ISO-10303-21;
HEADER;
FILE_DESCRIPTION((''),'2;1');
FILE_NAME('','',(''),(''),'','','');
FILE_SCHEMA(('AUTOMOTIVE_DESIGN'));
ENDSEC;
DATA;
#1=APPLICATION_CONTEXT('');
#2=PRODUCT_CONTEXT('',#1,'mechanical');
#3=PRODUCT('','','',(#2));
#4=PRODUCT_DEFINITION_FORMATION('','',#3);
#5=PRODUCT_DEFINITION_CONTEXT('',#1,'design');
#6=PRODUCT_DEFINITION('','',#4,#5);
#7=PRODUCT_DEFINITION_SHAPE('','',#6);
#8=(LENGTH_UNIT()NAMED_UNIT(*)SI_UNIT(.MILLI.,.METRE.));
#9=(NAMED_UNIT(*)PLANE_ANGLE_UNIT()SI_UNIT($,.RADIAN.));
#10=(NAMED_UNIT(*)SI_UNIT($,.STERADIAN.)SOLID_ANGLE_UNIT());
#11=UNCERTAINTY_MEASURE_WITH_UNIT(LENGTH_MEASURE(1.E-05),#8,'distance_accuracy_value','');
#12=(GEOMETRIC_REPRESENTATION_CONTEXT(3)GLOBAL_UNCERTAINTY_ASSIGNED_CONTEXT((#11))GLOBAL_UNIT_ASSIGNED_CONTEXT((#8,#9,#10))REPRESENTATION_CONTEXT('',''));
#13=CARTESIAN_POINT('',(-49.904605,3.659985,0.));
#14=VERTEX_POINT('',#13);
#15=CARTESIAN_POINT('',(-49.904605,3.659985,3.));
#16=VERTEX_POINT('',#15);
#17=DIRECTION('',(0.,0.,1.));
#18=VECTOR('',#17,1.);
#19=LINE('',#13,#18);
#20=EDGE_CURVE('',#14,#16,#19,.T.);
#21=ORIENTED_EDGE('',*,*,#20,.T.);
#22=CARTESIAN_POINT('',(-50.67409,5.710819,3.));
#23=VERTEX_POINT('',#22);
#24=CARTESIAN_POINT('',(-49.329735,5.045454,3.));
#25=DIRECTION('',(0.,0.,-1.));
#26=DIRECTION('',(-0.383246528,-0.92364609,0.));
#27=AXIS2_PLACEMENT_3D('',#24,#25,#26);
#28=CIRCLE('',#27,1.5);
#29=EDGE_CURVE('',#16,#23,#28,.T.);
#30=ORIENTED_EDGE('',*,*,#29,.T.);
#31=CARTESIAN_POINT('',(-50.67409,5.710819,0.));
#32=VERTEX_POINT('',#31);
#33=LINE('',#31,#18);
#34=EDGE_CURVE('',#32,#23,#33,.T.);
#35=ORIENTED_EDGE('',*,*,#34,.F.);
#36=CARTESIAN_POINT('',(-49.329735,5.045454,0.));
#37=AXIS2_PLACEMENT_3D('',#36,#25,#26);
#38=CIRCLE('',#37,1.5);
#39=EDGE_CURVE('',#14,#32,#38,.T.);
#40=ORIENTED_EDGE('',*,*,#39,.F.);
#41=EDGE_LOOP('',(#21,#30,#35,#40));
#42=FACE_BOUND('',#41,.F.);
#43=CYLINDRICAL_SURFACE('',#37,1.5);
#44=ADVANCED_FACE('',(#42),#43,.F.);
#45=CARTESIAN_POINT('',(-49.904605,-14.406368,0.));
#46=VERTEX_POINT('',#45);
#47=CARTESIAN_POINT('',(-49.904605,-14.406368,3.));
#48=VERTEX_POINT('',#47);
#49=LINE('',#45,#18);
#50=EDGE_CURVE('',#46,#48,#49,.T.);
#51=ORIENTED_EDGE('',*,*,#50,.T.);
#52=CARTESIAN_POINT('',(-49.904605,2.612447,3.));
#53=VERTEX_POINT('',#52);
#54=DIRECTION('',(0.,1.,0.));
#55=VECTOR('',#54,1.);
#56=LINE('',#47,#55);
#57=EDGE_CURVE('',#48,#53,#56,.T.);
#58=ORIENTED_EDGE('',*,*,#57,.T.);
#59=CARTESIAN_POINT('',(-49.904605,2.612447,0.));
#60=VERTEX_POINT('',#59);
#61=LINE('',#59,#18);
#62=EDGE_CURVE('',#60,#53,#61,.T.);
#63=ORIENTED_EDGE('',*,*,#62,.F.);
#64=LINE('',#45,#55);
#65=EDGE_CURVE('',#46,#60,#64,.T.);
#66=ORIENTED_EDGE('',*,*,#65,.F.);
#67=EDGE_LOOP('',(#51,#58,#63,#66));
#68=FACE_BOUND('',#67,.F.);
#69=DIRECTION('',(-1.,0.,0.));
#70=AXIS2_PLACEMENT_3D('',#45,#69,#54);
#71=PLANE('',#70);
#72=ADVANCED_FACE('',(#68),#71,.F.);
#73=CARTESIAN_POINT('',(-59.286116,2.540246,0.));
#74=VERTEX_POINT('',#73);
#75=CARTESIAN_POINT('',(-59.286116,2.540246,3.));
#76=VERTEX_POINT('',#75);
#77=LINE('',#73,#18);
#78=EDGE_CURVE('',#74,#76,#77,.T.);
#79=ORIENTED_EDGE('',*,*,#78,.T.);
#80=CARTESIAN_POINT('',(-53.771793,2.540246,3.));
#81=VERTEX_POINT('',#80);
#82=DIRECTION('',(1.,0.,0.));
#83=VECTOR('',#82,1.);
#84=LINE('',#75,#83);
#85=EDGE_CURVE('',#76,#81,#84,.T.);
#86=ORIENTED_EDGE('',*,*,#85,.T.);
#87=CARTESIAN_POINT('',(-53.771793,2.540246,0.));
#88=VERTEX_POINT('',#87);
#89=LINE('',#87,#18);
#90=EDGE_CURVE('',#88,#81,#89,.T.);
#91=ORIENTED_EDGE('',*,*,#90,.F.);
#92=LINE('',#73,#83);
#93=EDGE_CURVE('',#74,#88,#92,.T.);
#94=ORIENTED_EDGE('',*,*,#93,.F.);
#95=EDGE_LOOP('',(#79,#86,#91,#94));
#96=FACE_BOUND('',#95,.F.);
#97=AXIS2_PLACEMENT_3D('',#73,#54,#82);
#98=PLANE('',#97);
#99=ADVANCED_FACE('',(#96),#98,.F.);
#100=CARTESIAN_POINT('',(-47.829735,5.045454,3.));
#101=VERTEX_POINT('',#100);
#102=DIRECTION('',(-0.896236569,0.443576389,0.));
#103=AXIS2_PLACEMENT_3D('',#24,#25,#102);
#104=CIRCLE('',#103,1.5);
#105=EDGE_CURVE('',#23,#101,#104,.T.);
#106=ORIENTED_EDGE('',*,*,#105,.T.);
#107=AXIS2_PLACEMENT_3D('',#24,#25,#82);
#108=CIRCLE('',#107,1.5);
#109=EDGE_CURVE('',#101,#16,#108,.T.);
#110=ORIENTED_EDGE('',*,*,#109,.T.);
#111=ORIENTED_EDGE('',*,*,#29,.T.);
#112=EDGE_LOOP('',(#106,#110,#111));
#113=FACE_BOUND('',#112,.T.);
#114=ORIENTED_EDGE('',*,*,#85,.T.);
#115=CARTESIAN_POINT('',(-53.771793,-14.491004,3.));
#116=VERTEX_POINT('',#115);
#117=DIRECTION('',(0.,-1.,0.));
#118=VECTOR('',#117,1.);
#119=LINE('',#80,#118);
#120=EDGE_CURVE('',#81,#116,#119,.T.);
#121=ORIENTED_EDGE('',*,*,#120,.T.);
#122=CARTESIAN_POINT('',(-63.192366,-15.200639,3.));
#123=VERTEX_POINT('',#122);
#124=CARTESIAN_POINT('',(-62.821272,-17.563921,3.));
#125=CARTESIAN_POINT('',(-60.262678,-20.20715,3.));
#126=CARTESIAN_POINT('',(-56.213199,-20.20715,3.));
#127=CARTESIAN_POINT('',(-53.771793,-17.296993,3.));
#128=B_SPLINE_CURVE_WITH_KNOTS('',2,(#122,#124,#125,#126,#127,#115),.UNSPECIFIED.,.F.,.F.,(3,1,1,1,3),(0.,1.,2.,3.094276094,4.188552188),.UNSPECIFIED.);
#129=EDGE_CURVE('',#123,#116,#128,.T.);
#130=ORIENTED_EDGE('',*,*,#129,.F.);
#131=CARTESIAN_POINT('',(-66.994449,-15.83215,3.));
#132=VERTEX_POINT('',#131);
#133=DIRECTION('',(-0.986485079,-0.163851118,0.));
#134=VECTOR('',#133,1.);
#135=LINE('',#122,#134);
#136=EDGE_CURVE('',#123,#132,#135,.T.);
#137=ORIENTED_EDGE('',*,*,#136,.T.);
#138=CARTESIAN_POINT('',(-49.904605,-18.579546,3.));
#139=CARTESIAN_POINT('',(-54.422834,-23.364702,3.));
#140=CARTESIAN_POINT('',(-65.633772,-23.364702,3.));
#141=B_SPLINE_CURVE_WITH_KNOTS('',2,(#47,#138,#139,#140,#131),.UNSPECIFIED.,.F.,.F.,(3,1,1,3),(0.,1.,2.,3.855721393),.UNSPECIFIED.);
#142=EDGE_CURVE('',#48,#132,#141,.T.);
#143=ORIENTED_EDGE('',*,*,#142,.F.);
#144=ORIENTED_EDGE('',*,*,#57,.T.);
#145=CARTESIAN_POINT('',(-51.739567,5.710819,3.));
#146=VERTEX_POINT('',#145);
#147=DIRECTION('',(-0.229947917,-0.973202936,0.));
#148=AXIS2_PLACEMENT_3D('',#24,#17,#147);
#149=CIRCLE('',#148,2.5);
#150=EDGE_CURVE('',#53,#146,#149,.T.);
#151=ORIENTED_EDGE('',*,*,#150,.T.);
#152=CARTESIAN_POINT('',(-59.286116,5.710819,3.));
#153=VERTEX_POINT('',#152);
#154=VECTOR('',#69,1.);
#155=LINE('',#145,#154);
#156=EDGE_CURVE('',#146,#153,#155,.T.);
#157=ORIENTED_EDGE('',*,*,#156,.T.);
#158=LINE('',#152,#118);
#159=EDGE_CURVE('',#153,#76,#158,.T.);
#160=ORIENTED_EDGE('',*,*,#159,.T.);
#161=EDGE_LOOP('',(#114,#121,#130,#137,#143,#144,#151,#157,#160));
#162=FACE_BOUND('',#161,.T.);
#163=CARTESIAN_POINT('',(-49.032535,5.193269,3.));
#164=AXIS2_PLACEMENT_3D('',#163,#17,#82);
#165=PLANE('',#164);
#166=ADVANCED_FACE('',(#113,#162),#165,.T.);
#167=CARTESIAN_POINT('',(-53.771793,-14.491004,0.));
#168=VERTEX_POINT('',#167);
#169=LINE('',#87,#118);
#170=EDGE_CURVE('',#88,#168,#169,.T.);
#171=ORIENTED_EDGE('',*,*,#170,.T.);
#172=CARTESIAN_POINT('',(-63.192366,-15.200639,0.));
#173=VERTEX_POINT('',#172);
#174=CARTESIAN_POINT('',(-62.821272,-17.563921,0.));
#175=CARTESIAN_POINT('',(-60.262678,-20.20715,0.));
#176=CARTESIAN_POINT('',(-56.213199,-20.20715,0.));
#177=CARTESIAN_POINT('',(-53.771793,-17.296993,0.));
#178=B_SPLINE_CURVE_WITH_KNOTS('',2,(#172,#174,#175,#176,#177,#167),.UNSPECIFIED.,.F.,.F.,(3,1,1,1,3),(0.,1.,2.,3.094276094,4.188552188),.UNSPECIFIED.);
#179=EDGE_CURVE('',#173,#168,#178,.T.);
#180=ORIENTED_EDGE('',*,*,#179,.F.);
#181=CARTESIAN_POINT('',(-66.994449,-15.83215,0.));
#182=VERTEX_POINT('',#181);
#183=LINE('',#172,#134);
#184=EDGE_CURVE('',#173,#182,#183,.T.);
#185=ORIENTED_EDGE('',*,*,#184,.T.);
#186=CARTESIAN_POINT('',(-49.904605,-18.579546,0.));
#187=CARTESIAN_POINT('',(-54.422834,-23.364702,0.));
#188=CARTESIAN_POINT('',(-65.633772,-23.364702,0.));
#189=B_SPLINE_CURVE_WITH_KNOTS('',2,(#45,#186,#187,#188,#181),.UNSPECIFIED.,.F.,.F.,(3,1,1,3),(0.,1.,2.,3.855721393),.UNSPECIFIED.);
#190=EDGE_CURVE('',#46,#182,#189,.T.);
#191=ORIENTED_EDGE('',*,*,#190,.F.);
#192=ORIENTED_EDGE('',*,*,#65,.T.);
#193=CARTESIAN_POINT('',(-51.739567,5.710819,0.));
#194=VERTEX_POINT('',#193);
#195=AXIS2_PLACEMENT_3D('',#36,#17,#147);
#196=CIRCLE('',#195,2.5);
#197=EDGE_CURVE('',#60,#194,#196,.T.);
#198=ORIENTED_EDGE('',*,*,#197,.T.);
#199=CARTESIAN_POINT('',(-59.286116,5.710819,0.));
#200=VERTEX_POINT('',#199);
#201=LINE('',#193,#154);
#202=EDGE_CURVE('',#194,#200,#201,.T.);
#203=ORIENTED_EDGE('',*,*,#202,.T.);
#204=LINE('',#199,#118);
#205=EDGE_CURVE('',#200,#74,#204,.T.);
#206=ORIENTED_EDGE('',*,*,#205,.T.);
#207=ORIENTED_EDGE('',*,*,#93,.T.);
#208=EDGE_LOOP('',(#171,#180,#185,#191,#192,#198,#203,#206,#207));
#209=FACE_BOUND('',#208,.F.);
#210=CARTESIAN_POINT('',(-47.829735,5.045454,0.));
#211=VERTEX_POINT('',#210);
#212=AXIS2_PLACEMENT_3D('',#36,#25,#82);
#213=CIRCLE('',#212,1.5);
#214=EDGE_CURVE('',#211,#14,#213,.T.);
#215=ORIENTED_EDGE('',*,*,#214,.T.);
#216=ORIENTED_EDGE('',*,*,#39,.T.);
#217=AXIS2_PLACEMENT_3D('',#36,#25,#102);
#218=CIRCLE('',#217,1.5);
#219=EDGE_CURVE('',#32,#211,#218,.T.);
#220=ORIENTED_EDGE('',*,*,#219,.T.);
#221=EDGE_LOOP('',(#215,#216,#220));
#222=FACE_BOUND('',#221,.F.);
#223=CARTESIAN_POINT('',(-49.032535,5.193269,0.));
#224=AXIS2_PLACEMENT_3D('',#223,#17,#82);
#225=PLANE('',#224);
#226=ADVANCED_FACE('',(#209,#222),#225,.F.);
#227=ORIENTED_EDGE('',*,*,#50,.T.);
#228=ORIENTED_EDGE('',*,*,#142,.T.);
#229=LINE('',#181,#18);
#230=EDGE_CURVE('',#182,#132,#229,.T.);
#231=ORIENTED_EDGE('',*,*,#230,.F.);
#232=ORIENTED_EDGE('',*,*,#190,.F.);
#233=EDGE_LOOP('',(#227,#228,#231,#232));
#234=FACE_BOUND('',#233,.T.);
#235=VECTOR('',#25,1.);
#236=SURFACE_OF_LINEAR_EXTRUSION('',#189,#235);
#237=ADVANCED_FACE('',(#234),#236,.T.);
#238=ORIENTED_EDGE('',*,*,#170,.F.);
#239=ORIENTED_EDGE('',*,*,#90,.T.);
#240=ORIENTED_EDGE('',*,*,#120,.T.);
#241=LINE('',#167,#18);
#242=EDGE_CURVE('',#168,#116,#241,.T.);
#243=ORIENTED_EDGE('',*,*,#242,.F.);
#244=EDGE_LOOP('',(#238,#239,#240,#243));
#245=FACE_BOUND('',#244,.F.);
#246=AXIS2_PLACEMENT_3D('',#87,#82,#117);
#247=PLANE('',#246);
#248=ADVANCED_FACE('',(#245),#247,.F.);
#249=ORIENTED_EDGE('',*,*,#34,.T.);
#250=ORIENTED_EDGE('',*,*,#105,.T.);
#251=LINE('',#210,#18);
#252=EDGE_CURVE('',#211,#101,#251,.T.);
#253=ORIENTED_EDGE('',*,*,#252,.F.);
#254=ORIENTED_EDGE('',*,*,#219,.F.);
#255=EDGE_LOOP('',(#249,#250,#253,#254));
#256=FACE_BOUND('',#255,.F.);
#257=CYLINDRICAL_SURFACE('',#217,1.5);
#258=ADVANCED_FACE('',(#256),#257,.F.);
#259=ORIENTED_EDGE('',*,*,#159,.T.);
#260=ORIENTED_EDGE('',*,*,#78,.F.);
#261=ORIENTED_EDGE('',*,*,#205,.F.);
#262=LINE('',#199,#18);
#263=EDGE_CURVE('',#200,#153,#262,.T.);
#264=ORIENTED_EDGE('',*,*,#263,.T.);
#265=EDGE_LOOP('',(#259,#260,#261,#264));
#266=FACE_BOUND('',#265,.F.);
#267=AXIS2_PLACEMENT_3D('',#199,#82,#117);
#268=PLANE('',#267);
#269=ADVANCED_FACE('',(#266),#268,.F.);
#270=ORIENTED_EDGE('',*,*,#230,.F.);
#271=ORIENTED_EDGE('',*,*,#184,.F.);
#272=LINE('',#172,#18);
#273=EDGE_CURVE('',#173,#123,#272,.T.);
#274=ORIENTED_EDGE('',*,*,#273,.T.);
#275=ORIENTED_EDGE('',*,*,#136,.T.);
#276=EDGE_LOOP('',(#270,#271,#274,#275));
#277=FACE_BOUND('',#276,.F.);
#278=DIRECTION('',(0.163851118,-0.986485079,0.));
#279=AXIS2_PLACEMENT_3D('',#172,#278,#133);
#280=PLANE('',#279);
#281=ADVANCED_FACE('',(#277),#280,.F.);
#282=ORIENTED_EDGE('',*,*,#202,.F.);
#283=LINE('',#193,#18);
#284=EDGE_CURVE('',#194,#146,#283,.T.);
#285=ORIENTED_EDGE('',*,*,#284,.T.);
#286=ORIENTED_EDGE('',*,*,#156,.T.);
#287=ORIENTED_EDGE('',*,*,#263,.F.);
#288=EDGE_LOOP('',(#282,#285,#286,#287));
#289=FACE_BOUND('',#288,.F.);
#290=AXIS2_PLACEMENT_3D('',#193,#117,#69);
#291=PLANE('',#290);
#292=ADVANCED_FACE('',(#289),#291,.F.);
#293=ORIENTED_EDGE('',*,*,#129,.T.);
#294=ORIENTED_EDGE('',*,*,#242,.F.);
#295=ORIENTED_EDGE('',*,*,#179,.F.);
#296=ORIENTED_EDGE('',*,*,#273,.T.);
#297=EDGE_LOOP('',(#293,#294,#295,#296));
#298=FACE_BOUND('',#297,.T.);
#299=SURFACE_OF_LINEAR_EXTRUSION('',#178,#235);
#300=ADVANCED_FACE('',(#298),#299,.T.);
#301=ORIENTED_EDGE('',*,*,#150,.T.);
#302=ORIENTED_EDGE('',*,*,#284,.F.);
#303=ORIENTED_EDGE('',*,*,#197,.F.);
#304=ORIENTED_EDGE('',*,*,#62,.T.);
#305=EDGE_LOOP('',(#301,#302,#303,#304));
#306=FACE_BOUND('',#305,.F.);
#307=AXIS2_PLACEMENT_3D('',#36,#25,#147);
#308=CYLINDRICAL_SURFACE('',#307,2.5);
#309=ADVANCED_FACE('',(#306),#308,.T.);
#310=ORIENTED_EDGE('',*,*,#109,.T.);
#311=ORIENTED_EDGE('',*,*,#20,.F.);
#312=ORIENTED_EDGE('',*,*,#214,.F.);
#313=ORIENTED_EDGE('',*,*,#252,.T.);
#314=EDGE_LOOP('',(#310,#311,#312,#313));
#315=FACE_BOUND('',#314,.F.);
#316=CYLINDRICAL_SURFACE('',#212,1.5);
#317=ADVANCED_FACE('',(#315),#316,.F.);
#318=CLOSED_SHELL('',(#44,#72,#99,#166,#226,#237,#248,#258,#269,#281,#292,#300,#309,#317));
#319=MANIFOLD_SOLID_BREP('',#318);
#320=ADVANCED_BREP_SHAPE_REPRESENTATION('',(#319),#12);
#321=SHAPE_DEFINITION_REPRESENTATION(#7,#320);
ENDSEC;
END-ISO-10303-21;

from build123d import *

# Parameters (mm, degrees)
F1_DEPTH = 3


with BuildPart() as f1:
    # F0 (on Top) → F1 (new body)
    with BuildSketch(Plane.XY):
        with BuildLine():
            ThreePointArc((-50.6740901919, 5.7108190317), (-48.9880719662, 6.5060249327), (-47.8297353387, 5.0454544483))
            ThreePointArc((-47.8297353387, 5.0454544483), (-48.4967601552, 3.7979960948), (-49.9046051304, 3.6599853138))
            Line((-49.9046051304, 3.6599853138), (-49.9046051304, 2.6124471071))
            ThreePointArc((-49.9046051304, 2.6124471071), (-47.7784736714, 3.084947565), (-46.8297353387, 5.0454544483))
            ThreePointArc((-46.8297353387, 5.0454544483), (-48.9940121238, 7.5228098776), (-51.7395672771, 5.7108190317))
            Line((-51.7395672771, 5.7108190317), (-50.6740901919, 5.7108190317))
        make_face()
        with BuildLine():
            ThreePointArc((-49.9046051304, 3.6599853138), (-50.7341339801, 4.518515689), (-50.6740901919, 5.7108190317))
            Line((-50.6740901919, 5.7108190317), (-51.7395672771, 5.7108190317))
            ThreePointArc((-51.7395672771, 5.7108190317), (-51.4808021089, 3.7715189123), (-49.9046051304, 2.6124471071))
            Line((-49.9046051304, 2.6124471071), (-49.9046051304, 3.6599853138))
        make_face()
        with BuildLine():
            ThreePointArc((-49.9046051304, 2.6124471071), (-51.4808021089, 3.7715189123), (-51.7395672771, 5.7108190317))
            Line((-51.7395672771, 5.7108190317), (-59.286115547, 5.7108190317))
            Line((-59.286115547, 5.7108190317), (-59.286115547, 2.540246115))
            Line((-59.286115547, 2.540246115), (-53.7717926304, 2.540246115))
            Line((-53.7717926304, 2.540246115), (-53.7717926304, -14.491003885))
            add(Edge.make_bspline(
                [(-54.9924957554, -18.7520715933), (-53.7717926304, -17.2969934683), (-53.7717926304, -14.491003885)],
                knots=[0, 0, 0, 1, 1, 1], degree=2))
            add(Edge.make_bspline(
                [(-58.329084297, -20.2071497183), (-56.2131988804, -20.2071497183), (-54.9924957554, -18.7520715933)],
                knots=[0, 0, 0, 1, 1, 1], degree=2))
            add(Edge.make_bspline(
                [(-61.541974922, -18.885535135), (-60.262678047, -20.2071497183), (-58.329084297, -20.2071497183)],
                knots=[0, 0, 0, 1, 1, 1], degree=2))
            add(Edge.make_bspline(
                [(-63.192365547, -15.2006393017), (-62.821271797, -17.5639205517), (-61.541974922, -18.885535135)],
                knots=[0, 0, 0, 1, 1, 1], degree=2))
            Line((-63.192365547, -15.2006393017), (-66.9944488804, -15.8321497183))
            add(Edge.make_bspline(
                [(-58.348615547, -23.3647018017), (-65.633771797, -23.3647018017), (-66.9944488804, -15.8321497183)],
                knots=[0, 0, 0, 1, 1, 1], degree=2))
            add(Edge.make_bspline(
                [(-52.1637197137, -20.9721236767), (-54.422834297, -23.3647018017), (-58.348615547, -23.3647018017)],
                knots=[0, 0, 0, 1, 1, 1], degree=2))
            add(Edge.make_bspline(
                [(-49.9046051304, -14.4063684683), (-49.9046051304, -18.5795455517), (-52.1637197137, -20.9721236767)],
                knots=[0, 0, 0, 1, 1, 1], degree=2))
            Line((-49.9046051304, -14.4063684683), (-49.9046051304, 2.6124471071))
        make_face()
    extrude(amount=F1_DEPTH)


solid = f1.part
